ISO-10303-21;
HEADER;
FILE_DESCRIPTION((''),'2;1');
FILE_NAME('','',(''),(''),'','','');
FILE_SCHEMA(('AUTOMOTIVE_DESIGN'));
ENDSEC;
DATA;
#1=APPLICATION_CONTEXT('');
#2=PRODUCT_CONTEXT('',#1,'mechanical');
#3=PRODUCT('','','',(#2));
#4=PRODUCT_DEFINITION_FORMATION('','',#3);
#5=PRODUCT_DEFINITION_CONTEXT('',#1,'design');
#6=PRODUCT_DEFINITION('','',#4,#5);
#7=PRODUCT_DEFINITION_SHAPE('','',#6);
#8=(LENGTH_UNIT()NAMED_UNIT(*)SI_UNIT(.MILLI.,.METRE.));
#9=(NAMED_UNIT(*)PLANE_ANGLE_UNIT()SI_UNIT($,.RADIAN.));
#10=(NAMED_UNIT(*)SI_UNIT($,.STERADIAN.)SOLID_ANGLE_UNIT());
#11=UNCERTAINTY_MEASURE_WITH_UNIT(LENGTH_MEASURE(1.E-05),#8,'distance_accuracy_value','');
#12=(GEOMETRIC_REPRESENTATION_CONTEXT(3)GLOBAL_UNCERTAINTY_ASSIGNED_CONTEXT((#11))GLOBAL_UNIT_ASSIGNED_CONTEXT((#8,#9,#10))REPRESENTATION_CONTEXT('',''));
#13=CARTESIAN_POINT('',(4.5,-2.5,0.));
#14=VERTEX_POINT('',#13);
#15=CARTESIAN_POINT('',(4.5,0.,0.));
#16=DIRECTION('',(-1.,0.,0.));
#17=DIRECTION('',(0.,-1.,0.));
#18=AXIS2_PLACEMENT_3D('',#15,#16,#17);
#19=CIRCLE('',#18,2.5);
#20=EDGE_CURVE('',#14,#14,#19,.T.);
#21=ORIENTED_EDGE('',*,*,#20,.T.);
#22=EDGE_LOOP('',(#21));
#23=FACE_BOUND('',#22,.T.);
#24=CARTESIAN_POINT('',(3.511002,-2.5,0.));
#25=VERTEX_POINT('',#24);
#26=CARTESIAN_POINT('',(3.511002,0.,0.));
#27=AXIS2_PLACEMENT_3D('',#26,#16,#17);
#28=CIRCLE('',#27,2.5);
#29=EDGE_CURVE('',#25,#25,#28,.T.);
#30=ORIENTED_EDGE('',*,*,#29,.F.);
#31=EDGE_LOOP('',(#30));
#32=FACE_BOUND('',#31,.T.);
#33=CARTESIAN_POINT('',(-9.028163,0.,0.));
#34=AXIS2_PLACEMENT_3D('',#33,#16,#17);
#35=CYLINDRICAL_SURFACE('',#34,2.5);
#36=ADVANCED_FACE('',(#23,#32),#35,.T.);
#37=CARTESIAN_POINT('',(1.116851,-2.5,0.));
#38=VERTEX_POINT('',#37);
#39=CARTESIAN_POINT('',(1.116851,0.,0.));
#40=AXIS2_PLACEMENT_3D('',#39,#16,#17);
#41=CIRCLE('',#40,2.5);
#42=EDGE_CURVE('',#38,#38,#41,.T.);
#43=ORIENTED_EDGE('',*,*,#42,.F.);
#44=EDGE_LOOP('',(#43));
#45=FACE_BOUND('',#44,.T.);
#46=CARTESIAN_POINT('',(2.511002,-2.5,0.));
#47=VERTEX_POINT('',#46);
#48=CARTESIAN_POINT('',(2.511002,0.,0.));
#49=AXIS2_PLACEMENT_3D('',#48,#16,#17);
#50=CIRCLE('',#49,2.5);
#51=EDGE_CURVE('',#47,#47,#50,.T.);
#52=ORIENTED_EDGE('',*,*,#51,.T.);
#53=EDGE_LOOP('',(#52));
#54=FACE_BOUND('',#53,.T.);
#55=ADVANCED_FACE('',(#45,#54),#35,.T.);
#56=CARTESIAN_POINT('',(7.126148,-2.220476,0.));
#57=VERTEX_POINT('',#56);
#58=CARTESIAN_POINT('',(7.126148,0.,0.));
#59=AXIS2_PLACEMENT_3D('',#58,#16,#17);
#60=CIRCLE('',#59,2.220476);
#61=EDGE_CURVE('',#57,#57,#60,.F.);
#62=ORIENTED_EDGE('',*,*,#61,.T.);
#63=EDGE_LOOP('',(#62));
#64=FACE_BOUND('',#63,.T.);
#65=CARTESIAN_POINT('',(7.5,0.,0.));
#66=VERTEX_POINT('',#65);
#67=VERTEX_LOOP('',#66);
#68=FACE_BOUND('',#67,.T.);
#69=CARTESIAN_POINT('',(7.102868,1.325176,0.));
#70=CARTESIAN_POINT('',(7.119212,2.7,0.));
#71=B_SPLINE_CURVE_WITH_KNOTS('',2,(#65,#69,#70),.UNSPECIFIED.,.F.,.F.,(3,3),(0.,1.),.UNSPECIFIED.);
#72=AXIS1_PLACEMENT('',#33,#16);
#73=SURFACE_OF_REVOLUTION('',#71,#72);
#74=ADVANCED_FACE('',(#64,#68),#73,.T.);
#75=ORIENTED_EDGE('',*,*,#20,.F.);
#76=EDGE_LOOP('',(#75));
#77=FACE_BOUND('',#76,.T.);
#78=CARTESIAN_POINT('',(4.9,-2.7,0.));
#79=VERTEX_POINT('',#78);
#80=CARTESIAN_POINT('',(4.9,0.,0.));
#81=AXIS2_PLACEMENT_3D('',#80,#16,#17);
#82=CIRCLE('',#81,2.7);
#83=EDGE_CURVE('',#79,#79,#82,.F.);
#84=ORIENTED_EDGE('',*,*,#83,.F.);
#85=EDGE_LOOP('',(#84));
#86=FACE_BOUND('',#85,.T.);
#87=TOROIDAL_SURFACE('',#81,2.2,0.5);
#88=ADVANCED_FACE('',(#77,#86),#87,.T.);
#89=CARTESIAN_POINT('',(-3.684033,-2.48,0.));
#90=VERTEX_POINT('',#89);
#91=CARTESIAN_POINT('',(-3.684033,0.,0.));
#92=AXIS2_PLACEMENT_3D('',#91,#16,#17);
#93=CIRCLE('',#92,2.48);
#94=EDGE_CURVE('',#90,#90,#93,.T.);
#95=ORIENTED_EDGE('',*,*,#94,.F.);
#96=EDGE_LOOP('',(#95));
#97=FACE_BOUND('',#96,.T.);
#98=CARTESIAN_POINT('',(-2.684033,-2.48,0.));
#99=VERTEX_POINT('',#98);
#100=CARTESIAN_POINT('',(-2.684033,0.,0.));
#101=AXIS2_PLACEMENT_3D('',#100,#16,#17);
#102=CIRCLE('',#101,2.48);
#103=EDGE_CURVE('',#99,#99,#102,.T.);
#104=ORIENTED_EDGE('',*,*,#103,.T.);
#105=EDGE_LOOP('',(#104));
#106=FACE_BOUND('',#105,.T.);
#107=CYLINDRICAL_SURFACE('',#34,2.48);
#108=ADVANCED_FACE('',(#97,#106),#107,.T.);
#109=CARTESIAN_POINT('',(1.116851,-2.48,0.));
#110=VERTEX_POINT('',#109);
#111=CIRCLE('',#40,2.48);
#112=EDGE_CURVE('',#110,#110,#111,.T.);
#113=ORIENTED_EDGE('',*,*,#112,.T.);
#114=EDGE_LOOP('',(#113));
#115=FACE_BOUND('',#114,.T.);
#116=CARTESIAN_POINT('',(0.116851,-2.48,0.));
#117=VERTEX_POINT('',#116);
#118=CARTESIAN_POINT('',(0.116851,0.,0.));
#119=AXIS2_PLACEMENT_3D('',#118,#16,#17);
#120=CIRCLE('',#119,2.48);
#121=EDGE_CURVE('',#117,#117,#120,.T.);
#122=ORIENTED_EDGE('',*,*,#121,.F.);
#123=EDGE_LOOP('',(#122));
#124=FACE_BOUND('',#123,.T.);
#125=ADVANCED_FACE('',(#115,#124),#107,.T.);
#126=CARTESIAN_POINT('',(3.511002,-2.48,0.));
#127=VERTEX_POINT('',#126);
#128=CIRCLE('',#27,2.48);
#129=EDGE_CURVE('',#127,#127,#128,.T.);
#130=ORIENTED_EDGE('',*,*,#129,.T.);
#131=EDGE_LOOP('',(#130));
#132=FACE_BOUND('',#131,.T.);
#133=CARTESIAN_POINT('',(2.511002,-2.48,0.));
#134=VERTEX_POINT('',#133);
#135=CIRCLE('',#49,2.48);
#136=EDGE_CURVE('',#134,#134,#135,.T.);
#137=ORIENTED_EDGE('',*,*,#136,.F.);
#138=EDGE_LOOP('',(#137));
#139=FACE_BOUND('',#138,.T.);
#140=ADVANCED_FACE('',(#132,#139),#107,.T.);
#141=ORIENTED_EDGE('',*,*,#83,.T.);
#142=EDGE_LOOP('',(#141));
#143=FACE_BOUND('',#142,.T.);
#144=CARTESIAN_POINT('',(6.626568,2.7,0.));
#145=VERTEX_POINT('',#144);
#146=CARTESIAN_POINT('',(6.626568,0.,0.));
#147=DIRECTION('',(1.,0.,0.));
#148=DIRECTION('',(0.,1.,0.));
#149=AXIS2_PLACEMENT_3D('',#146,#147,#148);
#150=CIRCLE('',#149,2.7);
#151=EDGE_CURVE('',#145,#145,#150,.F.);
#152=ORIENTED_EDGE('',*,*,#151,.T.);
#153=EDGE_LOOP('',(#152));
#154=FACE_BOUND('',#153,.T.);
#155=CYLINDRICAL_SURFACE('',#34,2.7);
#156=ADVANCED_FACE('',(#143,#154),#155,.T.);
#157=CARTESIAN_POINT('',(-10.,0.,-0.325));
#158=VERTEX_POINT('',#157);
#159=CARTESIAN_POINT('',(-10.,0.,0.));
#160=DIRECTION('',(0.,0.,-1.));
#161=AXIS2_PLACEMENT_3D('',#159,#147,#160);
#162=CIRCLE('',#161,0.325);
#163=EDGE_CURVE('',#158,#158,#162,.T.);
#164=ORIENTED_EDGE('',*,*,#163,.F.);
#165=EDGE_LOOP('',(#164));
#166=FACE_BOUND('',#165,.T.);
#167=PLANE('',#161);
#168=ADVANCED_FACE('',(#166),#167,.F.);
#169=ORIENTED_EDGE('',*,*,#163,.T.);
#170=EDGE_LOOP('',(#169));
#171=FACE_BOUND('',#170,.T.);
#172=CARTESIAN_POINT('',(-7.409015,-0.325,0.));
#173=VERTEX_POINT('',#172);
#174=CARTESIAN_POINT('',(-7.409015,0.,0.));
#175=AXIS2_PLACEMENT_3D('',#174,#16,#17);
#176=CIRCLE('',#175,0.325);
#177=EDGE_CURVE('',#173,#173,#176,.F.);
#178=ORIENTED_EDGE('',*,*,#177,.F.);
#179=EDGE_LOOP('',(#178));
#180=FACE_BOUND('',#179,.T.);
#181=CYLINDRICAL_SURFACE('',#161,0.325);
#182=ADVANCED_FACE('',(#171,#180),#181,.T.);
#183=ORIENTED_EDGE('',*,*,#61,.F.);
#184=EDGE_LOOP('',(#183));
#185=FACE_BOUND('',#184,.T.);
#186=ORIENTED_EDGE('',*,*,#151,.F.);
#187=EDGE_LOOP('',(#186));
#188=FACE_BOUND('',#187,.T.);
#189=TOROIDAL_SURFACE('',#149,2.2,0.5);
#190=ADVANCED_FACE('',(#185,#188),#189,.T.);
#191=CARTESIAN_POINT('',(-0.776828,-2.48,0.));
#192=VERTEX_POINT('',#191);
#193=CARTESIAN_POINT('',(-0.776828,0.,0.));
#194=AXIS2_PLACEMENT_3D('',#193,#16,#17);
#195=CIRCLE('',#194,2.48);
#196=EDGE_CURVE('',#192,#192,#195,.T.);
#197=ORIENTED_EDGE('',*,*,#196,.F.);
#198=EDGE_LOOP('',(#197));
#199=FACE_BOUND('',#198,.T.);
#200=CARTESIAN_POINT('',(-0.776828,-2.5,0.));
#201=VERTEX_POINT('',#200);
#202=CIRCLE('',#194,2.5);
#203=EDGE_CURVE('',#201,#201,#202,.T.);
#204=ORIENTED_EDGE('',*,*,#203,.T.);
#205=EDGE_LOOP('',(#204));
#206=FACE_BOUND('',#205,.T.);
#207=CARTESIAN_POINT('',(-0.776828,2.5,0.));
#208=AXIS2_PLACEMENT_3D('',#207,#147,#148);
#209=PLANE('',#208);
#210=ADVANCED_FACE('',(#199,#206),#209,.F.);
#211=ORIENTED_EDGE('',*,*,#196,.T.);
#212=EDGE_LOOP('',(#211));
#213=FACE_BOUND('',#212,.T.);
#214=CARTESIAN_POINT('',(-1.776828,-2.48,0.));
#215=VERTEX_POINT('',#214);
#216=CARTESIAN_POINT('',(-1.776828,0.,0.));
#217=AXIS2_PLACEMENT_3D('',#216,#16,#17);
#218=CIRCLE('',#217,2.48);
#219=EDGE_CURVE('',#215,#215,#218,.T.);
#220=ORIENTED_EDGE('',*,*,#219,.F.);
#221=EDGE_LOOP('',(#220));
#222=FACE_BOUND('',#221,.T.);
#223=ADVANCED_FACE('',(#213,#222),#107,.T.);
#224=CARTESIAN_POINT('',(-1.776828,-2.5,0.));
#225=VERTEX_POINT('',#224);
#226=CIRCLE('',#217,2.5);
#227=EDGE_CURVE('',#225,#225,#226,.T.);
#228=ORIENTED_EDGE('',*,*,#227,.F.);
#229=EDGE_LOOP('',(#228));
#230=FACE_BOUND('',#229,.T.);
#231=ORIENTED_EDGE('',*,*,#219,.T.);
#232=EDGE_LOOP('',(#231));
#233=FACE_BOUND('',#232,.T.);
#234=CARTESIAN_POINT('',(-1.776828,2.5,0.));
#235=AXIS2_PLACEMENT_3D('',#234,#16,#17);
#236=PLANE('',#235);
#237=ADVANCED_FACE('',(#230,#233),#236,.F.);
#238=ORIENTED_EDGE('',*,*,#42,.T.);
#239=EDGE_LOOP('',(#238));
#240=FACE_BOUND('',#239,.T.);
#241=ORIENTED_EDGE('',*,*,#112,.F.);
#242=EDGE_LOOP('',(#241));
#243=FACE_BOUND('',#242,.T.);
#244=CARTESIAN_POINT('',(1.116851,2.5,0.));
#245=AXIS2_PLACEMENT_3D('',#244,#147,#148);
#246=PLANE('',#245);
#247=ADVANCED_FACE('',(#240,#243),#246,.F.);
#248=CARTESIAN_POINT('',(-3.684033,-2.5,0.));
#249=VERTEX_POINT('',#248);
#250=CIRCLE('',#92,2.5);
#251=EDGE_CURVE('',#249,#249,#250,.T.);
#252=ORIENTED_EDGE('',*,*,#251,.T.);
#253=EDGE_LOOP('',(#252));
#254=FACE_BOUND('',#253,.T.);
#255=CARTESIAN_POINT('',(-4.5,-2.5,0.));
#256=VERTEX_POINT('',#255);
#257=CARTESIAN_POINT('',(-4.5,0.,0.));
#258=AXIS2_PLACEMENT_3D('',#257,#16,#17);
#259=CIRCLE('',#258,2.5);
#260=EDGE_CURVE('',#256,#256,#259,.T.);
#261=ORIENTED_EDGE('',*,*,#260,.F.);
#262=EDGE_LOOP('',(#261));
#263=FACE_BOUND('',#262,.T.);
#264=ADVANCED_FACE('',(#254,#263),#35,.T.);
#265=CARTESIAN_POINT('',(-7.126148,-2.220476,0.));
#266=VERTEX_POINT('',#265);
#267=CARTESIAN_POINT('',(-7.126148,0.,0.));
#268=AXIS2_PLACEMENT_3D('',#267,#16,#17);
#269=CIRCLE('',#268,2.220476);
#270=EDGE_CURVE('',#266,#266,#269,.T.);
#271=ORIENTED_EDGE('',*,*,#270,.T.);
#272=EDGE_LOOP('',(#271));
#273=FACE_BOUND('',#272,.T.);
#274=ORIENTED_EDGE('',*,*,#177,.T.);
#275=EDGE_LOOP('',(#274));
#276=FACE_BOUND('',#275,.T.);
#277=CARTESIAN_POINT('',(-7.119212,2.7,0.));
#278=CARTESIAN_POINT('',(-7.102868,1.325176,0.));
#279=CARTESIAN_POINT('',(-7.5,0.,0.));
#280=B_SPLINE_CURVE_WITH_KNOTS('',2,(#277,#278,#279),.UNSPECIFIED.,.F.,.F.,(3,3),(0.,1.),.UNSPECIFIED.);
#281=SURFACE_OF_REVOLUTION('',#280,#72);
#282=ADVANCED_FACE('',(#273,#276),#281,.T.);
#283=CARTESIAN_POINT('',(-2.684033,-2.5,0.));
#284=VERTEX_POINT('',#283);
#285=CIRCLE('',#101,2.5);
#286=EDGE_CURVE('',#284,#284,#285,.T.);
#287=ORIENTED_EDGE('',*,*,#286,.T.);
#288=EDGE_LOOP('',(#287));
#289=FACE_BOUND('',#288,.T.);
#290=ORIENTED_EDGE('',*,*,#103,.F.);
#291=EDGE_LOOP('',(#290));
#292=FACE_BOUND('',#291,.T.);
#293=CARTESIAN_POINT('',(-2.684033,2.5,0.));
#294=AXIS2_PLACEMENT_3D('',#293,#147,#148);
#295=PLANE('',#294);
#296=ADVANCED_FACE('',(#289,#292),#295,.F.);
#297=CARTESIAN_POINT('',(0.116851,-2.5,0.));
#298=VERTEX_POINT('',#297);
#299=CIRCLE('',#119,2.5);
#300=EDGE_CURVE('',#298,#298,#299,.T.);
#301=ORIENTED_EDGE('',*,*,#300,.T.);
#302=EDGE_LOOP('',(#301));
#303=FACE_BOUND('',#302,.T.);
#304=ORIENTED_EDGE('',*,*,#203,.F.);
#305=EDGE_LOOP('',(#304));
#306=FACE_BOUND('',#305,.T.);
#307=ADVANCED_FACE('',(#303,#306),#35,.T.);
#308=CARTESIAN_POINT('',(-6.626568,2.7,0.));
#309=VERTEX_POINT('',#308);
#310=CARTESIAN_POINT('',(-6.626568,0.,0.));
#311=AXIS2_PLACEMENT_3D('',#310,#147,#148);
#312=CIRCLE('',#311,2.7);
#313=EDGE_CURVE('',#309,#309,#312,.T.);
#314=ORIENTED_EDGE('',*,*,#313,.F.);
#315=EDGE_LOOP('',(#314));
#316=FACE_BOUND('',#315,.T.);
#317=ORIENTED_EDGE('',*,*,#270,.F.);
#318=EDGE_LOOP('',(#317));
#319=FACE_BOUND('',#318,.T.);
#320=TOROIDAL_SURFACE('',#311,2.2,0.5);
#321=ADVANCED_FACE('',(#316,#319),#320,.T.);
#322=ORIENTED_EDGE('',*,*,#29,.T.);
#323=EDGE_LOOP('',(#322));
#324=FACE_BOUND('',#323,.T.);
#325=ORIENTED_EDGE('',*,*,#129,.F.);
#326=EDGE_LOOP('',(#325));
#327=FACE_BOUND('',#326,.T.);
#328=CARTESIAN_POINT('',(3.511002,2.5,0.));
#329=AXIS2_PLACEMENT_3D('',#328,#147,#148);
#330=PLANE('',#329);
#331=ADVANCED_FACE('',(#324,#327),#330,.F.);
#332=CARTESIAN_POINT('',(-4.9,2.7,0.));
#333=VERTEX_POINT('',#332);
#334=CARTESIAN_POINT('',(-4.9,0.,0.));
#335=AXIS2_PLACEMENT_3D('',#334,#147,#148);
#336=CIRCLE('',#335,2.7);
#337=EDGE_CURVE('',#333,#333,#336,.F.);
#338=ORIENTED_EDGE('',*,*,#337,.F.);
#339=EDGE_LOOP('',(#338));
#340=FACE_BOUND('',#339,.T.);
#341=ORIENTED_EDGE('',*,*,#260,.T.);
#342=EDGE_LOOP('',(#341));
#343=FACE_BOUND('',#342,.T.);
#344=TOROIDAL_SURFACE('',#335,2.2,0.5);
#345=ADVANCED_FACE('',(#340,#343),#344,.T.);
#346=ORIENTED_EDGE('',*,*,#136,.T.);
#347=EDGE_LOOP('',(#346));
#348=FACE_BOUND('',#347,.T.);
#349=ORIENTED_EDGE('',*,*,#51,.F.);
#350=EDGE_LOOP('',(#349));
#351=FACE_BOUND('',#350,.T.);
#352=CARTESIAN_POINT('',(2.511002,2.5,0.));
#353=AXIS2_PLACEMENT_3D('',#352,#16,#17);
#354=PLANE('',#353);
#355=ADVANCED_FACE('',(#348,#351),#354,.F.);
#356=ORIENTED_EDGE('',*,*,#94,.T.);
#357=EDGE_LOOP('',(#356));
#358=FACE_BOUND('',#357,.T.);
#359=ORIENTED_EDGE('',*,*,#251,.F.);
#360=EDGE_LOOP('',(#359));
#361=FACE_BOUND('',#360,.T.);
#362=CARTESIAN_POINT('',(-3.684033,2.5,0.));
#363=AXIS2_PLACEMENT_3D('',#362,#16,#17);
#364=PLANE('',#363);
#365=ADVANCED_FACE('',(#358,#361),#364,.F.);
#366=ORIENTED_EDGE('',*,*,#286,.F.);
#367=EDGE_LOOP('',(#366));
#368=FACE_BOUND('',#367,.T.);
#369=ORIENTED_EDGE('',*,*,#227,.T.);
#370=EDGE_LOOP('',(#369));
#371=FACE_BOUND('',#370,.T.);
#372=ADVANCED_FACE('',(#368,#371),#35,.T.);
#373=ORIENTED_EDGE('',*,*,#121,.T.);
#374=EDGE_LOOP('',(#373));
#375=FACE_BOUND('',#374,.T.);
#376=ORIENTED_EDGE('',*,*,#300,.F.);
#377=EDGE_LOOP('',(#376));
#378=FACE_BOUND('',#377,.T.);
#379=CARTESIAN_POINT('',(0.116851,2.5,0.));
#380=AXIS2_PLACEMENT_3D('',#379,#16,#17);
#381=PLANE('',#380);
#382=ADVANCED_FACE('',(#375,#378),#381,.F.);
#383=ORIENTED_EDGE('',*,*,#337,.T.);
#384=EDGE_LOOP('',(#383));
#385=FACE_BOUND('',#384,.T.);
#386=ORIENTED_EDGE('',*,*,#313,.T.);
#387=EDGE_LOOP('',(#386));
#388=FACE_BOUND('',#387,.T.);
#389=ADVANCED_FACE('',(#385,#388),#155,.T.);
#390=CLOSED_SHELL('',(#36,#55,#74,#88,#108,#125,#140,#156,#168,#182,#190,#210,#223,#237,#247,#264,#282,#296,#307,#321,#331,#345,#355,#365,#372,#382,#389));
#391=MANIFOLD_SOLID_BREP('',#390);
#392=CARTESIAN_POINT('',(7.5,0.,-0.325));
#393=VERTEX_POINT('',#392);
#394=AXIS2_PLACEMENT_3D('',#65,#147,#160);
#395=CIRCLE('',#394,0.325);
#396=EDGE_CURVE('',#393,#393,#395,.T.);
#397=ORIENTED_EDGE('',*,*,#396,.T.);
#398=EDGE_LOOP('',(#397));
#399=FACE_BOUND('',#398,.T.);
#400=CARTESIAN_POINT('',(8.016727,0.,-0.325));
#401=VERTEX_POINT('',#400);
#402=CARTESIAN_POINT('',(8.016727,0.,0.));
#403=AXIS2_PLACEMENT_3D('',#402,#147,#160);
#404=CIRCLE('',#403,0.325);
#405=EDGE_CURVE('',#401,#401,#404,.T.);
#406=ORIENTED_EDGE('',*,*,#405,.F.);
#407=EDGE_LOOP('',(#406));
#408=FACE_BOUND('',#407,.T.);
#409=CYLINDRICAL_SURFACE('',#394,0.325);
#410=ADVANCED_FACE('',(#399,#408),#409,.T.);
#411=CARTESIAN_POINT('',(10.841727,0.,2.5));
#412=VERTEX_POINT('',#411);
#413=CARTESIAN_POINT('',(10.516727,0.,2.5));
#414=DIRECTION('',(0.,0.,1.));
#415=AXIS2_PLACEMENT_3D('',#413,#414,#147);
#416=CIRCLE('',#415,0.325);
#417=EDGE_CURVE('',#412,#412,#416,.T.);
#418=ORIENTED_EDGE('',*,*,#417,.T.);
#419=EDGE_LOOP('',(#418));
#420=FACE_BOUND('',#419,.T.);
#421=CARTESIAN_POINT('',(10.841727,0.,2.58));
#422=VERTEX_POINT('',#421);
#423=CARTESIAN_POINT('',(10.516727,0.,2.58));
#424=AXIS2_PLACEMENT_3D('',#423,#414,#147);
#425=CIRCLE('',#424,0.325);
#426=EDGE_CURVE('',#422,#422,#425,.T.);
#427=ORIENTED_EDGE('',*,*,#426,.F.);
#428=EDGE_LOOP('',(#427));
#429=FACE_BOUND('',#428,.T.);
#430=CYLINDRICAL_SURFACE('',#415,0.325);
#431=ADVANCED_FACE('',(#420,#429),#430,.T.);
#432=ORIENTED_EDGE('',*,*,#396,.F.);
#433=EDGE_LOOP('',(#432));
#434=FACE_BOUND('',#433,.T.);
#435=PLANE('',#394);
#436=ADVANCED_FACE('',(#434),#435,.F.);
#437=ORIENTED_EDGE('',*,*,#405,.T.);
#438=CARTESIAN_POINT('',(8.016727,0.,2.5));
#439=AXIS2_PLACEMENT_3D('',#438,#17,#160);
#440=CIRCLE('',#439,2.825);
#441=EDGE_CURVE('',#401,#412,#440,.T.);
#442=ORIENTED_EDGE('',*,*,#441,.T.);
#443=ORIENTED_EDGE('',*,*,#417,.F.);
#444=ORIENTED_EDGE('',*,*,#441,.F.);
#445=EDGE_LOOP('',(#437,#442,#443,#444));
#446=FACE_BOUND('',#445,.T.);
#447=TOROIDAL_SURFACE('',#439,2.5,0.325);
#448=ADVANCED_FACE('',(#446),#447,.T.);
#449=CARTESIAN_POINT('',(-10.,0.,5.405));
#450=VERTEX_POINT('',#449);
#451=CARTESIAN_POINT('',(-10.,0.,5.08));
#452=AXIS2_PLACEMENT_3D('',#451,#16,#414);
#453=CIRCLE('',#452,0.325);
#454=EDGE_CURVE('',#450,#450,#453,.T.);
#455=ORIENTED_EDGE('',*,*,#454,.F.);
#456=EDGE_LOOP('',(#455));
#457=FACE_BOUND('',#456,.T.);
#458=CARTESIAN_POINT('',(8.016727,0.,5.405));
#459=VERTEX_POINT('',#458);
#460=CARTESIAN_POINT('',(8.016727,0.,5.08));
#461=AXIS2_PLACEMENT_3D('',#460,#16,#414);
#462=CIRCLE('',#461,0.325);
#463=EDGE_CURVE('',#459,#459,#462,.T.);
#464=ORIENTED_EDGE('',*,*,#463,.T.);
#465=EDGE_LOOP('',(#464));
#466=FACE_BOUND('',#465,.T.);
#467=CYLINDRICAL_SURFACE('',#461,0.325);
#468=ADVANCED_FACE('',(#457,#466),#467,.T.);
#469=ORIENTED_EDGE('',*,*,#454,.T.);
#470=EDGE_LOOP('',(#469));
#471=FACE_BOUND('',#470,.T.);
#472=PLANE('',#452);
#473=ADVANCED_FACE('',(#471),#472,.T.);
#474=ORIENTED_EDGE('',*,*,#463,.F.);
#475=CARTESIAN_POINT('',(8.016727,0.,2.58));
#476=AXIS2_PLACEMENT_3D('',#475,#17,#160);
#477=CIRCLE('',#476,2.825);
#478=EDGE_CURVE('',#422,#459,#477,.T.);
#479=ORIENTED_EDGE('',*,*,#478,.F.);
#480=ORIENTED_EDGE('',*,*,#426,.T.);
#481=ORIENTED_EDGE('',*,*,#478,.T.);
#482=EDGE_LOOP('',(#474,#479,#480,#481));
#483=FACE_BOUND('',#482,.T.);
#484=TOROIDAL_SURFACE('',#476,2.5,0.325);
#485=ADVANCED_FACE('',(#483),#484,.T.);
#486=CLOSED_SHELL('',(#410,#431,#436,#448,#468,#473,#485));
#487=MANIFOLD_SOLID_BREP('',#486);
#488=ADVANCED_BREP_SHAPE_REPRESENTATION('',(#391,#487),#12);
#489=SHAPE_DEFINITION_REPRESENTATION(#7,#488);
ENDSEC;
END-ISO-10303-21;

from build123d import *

# Parameters (mm, degrees)
FILLET1_R                = 0.5
FILLET2_R                = 0.5
BOSS_EXTRUDE1_DEPTH      = 2
BOSS_EXTRUDE1_DEPTH_BACK = 2.5
SKETCH8_R                = 0.325
SKETCH10_R               = 0.325


with BuildPart() as part:
    # Sketch3 → Revolve1 (revolve)
    with BuildSketch(Plane.XY, mode=Mode.PRIVATE) as revolve1_sk:
        with BuildLine():
            Line((-7.119211928, 2.7), (-4.5, 2.7))
            Line((-4.5, 2.7), (-4.5, 2.5))
            Line((-4.5, 2.5), (-3.684032732, 2.5))
            Line((-3.684032732, 2.5), (-3.684032732, 2.48))
            Line((-3.684032732, 2.48), (-2.684032732, 2.48))
            Line((-2.684032732, 2.48), (-2.684032732, 2.5))
            Line((-2.684032732, 2.5), (-1.776827573, 2.5))
            Line((-1.776827573, 2.5), (-1.776827573, 2.48))
            Line((-1.776827573, 2.48), (-0.776827573, 2.48))
            Line((-0.776827573, 2.48), (-0.776827573, 2.5))
            Line((-0.776827573, 2.5), (0.116851308, 2.5))
            Line((0.116851308, 2.5), (0.116851308, 2.48))
            Line((0.116851308, 2.48), (1.116851308, 2.48))
            Line((1.116851308, 2.48), (1.116851308, 2.5))
            Line((1.116851308, 2.5), (2.511002465, 2.5))
            Line((2.511002465, 2.5), (2.511002465, 2.48))
            Line((2.511002465, 2.48), (3.511002465, 2.48))
            Line((3.511002465, 2.48), (3.511002465, 2.5))
            Line((3.511002465, 2.5), (4.5, 2.5))
            Line((4.5, 2.5), (4.5, 2.7))
            Line((4.5, 2.7), (7.119211928, 2.7))
            add(Edge.make_bspline(
                [(7.119211928, 2.7), (7.102867944, 1.325176063), (7.5, 0)],
                knots=[0, 0, 0, 1, 1, 1], degree=2))
            Line((7.5, 0), (-7.5, 0))
            add(Edge.make_bspline(
                [(-7.119211928, 2.7), (-7.102867944, 1.325176063), (-7.5, 0)],
                knots=[0, 0, 0, 1, 1, 1], degree=2))
        make_face()
    revolve(revolve1_sk.sketch.rotate(Axis((-9.028162595, 0, 0), (1, 0, 0)), 180), axis=Axis((-9.028162595, 0, 0), (1, 0, 0)))

    # Fillet1
    fillet1_edges = [part.edges().sort_by_distance(p)[0] for p in [
        (-7.119211928, 2.7, 0),
        (7.119211928, 2.7, 0),
    ]]
    fillet(fillet1_edges, radius=FILLET1_R)

    # Fillet2
    # the kernel refuses this fillet: 0.5 mm, written as the material it takes off along each edge
    with BuildSketch(Plane(origin=(-4.5, 0, 0), x_dir=(0, -1, 0), z_dir=(0, 0, 1))) as fillet2_piece_1:
        with BuildLine():
            CenterArc((2.2, -0.4), FILLET2_R, 0, 53.130102355)
            Line((2.5, 0), (2.506, 0.008))
            ThreePointArc((2.506, 0.008), (2.6, 0.01), (2.7, 0.01))
            Line((2.7, 0.01), (2.71, 0))
            Line((2.71, 0), (2.71, -0.4))
            Line((2.71, -0.4), (2.7, -0.4))
        make_face()
    revolve(axis=Axis((-4.5, 0, 0), (1, 0, 0)), mode=Mode.SUBTRACT)
    with BuildSketch(Plane(origin=(4.5, 0, 0), x_dir=(0, -1, 0), z_dir=(0, 0, 1))) as fillet2_piece_2:
        with BuildLine():
            CenterArc((2.2, 0.4), FILLET2_R, 306.869897645, 53.130102355)
            Line((2.7, 0.4), (2.71, 0.4))
            Line((2.71, 0.4), (2.71, 0))
            Line((2.71, 0), (2.7, -0.01))
            ThreePointArc((2.7, -0.01), (2.6, -0.01), (2.506, -0.008))
            Line((2.506, -0.008), (2.5, 0))
        make_face()
    revolve(axis=Axis((4.5, 0, 0), (1, 0, 0)), mode=Mode.SUBTRACT)

    # Sketch8 → Boss-Extrude1 (add, two sides: drawn at the far end of the back side and taken through both)
    with BuildSketch(Plane(origin=(-7.5, 0, 0), x_dir=(0, 0, -1), z_dir=(1, 0, 0)).offset(-BOSS_EXTRUDE1_DEPTH_BACK)):
        Circle(SKETCH8_R)
    extrude(amount=BOSS_EXTRUDE1_DEPTH + BOSS_EXTRUDE1_DEPTH_BACK)


with BuildPart() as body_2:
    # Sweep1: sweep along a path in Sketch9
    with BuildLine(Plane(origin=(0, 0, 0), x_dir=(1, 0, 0), z_dir=(0, 1, 0))) as sweep1_path:
        Line((7.5, 0), (8.016727075, 0))
        ThreePointArc((8.016727075, 0), (9.784494028, -0.732233047), (10.516727075, -2.5))
        Line((10.516727075, -2.5), (10.516727075, -2.58))
        ThreePointArc((10.516727075, -2.58), (9.784494028, -4.347766953), (8.016727075, -5.08))
        Line((8.016727075, -5.08), (-10, -5.08))
    # Sketch10 → Sweep1 (sweep)
    with BuildSketch(Plane(origin=(7.5, 0, 0), x_dir=(0, 0, -1), z_dir=(1, 0, 0))):
        Circle(SKETCH10_R)
    sweep(path=sweep1_path.line)


solid = Compound([part.part, body_2.part])
